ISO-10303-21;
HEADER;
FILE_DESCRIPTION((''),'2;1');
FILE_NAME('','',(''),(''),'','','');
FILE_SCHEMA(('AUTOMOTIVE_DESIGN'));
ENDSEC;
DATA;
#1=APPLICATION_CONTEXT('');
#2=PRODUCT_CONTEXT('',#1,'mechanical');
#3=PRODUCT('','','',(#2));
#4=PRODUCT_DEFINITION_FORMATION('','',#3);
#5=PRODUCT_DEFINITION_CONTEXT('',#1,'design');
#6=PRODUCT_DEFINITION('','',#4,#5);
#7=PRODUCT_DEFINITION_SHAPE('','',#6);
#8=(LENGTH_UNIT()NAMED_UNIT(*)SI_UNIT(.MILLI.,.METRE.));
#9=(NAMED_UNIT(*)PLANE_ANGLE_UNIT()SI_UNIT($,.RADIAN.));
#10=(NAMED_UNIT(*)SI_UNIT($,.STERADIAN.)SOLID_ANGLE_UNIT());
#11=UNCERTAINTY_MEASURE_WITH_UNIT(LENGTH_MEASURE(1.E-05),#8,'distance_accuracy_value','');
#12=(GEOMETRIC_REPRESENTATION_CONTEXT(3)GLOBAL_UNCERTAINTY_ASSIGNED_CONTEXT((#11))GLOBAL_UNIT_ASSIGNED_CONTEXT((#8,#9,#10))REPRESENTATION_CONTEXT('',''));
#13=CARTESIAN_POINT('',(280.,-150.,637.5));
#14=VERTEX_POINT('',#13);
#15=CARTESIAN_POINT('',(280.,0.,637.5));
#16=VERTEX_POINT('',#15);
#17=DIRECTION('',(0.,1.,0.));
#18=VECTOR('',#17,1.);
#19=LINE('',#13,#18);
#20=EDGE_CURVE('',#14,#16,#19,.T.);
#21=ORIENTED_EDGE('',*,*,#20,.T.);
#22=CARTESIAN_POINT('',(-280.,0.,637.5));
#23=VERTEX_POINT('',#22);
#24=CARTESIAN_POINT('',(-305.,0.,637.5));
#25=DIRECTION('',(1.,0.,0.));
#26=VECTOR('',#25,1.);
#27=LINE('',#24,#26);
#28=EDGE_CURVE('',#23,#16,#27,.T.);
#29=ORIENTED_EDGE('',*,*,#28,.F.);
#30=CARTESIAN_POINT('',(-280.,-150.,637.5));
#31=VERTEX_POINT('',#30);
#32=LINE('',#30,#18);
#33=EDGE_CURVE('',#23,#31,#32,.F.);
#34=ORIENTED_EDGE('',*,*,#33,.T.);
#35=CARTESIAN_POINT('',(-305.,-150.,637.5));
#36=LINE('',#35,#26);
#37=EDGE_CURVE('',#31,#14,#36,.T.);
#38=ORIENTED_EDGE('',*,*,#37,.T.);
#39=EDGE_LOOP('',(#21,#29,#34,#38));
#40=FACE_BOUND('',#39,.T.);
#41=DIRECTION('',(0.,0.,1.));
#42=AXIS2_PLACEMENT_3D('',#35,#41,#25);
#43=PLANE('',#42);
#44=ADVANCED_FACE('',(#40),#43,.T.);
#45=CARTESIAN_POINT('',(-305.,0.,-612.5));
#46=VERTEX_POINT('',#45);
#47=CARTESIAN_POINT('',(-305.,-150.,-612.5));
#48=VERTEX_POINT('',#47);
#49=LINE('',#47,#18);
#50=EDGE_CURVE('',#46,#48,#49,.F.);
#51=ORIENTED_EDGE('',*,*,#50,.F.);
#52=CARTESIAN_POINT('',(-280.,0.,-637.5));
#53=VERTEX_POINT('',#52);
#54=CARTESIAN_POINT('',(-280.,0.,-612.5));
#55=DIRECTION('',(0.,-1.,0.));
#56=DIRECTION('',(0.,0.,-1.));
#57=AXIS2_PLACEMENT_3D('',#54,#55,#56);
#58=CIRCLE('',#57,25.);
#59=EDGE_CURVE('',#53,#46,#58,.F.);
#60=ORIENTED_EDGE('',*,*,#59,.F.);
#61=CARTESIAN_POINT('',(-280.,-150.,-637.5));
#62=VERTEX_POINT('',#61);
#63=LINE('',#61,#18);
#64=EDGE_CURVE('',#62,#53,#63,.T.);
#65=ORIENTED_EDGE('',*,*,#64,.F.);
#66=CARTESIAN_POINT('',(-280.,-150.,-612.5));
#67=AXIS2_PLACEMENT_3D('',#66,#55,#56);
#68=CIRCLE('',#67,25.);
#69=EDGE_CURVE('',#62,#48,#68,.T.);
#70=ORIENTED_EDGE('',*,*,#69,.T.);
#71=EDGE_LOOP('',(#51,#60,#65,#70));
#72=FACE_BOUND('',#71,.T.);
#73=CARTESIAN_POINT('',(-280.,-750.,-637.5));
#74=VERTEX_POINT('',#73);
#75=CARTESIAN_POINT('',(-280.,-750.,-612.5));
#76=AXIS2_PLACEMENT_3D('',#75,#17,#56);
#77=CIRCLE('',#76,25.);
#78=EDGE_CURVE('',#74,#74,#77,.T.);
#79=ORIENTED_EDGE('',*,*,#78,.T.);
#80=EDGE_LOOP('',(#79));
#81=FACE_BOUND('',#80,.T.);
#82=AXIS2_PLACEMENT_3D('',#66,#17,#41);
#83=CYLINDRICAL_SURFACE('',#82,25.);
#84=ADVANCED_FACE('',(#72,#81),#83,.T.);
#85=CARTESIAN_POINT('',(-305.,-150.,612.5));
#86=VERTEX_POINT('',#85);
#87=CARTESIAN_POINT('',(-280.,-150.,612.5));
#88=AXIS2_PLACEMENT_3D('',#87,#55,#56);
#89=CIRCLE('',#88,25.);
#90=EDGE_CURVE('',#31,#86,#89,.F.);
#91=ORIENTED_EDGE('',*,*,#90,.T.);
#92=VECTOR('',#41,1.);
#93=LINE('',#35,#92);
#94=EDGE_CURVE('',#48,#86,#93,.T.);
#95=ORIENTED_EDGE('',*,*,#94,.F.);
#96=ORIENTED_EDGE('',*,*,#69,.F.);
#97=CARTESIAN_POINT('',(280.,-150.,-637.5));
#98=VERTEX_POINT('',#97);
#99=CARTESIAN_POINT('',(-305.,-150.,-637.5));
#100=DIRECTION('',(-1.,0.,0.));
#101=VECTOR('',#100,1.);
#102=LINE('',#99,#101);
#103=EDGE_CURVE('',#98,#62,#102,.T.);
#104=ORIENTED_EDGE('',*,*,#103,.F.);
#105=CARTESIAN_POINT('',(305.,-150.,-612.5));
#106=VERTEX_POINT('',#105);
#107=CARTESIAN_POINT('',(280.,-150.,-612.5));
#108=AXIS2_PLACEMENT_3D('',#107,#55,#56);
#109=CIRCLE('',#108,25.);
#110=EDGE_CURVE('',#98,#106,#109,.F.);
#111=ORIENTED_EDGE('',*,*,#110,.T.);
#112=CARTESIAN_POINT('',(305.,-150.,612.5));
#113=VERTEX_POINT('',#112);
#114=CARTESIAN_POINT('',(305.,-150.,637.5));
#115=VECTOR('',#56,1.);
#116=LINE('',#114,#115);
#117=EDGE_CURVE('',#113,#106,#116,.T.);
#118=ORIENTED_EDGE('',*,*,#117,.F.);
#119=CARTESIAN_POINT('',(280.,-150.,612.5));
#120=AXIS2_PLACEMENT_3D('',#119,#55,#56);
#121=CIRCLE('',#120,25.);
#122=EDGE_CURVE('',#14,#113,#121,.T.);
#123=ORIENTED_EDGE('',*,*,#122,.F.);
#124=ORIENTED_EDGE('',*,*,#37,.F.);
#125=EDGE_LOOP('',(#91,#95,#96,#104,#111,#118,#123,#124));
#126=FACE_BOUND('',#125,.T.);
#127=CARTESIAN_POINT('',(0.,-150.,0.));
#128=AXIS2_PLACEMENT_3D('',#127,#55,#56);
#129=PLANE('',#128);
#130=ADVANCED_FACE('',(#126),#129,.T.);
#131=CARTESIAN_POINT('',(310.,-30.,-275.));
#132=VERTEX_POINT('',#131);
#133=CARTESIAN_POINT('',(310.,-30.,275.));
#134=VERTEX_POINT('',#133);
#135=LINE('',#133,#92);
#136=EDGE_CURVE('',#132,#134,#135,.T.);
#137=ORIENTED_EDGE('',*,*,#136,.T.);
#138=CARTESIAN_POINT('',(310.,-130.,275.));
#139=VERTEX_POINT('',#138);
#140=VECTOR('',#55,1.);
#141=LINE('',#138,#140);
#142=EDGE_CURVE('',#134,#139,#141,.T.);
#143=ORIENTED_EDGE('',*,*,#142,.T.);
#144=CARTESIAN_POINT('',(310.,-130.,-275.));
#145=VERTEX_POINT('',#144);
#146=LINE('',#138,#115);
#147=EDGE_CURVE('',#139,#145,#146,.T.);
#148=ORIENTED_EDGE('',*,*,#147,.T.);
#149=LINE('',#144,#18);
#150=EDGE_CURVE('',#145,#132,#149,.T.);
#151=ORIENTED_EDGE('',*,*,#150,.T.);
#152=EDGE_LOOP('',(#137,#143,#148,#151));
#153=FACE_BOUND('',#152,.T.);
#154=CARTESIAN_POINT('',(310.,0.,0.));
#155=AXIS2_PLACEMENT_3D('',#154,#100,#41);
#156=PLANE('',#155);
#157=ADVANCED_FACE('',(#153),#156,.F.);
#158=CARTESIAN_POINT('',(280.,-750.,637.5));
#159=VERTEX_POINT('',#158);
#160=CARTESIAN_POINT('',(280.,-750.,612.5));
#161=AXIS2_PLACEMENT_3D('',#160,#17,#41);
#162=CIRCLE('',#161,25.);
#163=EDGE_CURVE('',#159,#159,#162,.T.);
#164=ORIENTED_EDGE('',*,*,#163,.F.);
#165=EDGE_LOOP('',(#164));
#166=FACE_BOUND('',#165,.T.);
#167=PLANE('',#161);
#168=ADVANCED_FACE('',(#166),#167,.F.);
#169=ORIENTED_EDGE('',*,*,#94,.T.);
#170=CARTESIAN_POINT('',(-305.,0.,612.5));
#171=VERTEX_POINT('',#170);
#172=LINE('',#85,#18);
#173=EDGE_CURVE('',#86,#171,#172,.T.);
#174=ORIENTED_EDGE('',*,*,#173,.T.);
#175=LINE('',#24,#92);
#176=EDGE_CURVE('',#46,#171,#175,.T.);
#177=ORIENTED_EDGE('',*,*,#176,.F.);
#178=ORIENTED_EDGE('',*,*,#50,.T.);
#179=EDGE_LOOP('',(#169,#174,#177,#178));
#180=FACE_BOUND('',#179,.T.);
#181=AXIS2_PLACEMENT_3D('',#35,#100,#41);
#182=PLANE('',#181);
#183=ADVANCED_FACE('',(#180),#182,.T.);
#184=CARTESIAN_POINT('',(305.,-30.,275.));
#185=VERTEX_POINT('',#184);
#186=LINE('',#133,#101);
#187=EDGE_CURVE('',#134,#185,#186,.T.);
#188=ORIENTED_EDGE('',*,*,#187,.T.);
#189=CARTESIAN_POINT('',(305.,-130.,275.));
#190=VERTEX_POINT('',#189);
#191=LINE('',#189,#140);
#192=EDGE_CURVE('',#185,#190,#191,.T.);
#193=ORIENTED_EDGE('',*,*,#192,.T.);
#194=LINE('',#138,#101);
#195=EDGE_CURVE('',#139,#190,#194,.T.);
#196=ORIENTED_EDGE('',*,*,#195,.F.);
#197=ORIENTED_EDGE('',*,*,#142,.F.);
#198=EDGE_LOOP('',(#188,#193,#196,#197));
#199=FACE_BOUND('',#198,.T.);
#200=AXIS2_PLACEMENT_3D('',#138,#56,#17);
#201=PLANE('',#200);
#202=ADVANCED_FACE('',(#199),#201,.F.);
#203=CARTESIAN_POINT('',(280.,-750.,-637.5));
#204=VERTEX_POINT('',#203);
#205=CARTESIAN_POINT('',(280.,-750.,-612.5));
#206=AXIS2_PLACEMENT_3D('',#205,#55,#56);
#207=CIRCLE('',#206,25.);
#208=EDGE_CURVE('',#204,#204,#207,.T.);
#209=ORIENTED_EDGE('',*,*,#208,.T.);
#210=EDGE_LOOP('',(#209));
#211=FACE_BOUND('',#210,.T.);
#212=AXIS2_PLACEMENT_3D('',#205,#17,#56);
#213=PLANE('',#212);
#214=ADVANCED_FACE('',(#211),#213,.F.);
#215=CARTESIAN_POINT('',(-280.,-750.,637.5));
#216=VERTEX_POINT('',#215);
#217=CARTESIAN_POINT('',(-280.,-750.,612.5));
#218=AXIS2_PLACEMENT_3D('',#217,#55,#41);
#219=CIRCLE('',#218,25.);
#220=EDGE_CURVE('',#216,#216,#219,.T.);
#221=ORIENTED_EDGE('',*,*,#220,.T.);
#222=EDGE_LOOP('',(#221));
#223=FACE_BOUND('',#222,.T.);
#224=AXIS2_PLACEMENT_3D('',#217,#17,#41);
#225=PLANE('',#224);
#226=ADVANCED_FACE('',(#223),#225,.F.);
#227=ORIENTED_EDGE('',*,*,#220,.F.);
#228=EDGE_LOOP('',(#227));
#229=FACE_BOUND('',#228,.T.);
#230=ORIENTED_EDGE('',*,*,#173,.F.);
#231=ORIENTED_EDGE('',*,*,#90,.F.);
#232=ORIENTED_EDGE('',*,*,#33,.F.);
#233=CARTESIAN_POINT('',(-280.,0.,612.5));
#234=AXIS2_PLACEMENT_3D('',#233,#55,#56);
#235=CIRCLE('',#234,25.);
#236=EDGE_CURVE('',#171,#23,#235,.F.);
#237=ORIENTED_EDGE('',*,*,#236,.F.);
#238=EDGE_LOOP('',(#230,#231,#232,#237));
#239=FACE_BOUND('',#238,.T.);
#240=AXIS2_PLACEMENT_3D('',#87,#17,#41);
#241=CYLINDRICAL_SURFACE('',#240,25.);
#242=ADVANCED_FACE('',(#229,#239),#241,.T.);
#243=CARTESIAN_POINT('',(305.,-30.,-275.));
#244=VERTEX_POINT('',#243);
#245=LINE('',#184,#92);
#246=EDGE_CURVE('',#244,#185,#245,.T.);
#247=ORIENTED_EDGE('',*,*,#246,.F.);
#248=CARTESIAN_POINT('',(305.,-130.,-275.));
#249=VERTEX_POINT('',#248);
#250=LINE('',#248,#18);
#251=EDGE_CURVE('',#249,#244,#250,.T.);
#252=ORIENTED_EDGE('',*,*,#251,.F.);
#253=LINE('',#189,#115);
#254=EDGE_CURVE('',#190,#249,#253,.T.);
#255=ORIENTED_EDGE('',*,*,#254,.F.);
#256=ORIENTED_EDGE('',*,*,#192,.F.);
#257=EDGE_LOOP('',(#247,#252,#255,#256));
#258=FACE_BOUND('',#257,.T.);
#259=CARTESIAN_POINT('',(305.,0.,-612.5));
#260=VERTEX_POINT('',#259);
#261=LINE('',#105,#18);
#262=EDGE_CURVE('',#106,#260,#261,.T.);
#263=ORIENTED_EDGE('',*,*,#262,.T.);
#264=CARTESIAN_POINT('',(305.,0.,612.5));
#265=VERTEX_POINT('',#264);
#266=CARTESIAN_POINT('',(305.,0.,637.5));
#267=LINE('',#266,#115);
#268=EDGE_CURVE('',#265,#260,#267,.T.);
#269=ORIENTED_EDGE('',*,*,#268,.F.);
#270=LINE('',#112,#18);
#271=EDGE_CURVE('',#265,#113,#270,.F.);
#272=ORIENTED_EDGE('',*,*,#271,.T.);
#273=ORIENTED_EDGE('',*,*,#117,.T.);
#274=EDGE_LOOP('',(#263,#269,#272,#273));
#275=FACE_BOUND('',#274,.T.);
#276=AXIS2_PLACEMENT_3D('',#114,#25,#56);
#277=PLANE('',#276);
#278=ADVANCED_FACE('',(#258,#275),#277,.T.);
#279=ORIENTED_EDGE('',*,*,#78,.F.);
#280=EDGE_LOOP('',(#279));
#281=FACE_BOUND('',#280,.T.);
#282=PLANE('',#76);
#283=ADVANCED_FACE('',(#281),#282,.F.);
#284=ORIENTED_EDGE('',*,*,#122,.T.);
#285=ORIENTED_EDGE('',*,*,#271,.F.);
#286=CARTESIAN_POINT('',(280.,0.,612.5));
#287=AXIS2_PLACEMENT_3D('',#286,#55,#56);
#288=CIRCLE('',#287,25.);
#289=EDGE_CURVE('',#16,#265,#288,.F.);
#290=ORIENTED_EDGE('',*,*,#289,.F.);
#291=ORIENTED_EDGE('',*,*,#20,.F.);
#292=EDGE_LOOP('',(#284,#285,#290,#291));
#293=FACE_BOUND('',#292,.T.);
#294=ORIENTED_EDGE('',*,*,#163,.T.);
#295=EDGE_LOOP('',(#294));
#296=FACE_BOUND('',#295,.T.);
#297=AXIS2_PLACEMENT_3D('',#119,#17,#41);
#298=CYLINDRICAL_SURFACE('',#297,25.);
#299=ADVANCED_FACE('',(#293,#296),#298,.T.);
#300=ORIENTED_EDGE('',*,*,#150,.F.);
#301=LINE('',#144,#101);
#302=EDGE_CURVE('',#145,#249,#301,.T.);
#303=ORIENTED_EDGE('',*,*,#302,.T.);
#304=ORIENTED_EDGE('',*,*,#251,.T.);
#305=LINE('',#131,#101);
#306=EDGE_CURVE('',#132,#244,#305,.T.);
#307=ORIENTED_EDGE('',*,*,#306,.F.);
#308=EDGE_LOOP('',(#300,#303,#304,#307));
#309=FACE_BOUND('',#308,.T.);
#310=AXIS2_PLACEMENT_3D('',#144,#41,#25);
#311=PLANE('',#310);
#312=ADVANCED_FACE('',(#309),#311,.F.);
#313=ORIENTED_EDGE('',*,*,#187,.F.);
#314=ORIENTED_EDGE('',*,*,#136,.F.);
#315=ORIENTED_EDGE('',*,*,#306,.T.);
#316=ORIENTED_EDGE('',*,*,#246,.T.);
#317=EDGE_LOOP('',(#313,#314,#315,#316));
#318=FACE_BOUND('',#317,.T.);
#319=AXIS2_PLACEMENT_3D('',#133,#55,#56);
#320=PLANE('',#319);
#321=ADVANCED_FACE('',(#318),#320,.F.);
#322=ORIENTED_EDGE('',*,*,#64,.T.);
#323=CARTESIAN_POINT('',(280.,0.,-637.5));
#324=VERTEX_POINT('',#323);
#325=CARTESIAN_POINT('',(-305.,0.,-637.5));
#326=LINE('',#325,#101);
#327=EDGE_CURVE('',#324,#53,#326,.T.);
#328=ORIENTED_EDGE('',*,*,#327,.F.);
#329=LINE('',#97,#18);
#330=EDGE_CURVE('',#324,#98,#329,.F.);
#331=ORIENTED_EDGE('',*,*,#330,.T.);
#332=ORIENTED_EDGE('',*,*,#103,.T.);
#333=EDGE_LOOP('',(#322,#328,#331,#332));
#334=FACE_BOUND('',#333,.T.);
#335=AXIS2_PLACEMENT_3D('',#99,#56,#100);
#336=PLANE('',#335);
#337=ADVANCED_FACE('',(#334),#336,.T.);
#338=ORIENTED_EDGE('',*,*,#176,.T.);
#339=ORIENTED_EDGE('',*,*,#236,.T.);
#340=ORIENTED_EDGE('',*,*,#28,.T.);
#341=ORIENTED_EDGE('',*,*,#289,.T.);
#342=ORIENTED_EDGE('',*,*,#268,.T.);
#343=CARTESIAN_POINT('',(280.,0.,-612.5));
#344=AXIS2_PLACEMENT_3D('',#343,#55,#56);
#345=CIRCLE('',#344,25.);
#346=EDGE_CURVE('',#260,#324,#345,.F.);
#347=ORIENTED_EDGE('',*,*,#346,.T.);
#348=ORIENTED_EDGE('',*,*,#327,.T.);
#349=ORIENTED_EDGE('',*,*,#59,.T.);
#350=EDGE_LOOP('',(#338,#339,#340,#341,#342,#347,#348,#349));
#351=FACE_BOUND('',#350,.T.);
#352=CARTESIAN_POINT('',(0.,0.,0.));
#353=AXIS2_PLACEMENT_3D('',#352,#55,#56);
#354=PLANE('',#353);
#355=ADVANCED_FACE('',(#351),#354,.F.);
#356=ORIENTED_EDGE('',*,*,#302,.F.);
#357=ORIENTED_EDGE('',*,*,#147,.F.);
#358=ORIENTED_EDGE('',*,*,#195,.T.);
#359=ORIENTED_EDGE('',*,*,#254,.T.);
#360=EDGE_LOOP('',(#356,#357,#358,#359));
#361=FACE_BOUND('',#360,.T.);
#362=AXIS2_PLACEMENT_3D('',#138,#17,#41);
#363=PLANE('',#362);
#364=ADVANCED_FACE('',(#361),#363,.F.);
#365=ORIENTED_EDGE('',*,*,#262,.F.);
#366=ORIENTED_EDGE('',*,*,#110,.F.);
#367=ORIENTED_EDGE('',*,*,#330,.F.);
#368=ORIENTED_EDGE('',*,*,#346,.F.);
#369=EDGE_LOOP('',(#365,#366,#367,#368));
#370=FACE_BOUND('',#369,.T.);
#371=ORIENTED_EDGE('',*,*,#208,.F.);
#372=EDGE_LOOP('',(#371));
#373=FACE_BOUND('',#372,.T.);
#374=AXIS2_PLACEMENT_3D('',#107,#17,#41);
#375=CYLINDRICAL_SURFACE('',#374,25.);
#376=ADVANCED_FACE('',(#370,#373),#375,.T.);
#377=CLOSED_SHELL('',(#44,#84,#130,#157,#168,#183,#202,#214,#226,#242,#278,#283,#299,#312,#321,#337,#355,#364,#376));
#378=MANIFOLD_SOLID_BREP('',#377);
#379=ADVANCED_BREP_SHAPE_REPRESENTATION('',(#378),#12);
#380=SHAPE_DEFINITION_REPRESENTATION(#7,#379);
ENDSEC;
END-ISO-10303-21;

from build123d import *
from build123d.topology import SkipClean

# Parameters (mm, degrees)
SKETCH_2_W               = 610
SKETCH_2_H               = 1275
EXTRUDE_1_DEPTH          = 150
FILLET_1_R               = 25
EXTRUDE_START            = -750
SKETCH_3_R               = 25
EXTRUDE_2_DEPTH          = 750
MIRROR_START             = -750
MIRROR_2_COPY_1_SKETCH_R = 25
MIRROR_2_COPY_1_DEPTH    = 750
SKETCH_4_W               = 550
SKETCH_4_H               = 100
EXTRUDE_3_DEPTH          = 5


with BuildPart() as part:
    # 草图2 → 凸台-拉伸1 (new body)
    with BuildSketch(Plane(origin=(0, 0, 0), x_dir=(1, 0, 0), z_dir=(0, 1, 0))):
        Rectangle(SKETCH_2_W, SKETCH_2_H)
    extrude(amount=-EXTRUDE_1_DEPTH)

    # 圆角1
    fillet_1_edges = [part.edges().sort_by_distance(p)[0] for p in [
        (-305, -75, -637.5),
        (305, -75, -637.5),
        (-305, -75, 637.5),
        (305, -75, 637.5),
    ]]
    fillet(fillet_1_edges, radius=FILLET_1_R)

    # 草图3 → 凸台-拉伸2 (add)
    with SkipClean():  # the faces are left unmerged after this step: merging them gives an invalid solid
        with BuildSketch(Plane(origin=(0, 0, 0), x_dir=(1, 0, 0), z_dir=(0, 1, 0)).offset(EXTRUDE_START)):
            with Locations((280, -612.5)):
                Circle(SKETCH_3_R)
        extrude_2 = extrude(amount=EXTRUDE_2_DEPTH)

    # 镜向1: 凸台-拉伸2 across plane
    with SkipClean():  # the faces are left unmerged after this step: merging them gives an invalid solid
        add(extrude_2.mirror(Plane(origin=(0, 0, 0), x_dir=(0, 0, 1), z_dir=(1, 0, 0))))

    # 镜向2: 凸台-拉伸2 across plane
    with SkipClean():  # the faces are left unmerged after this step: merging them gives an invalid solid
        add(extrude_2.mirror(Plane.XY))

    # 镜向2 copy 1 sketch → 镜向2 copy 1 (add)
    with SkipClean():  # the faces are left unmerged after this step: merging them gives an invalid solid
        with BuildSketch(Plane(origin=(0, 0, 0), x_dir=(-1, 0, 0), z_dir=(0, 1, 0)).offset(MIRROR_START)):
            with Locations((280, -612.5)):
                Circle(MIRROR_2_COPY_1_SKETCH_R)
        extrude(amount=MIRROR_2_COPY_1_DEPTH)

    # 草图4 → 凸台-拉伸3 (add)
    with SkipClean():  # the faces are left unmerged after this step: merging them gives an invalid solid
        with BuildSketch(Plane(origin=(305, 0, 0), x_dir=(0, 0, -1), z_dir=(1, 0, 0))):
            with Locations((0, -80)):
                Rectangle(SKETCH_4_W, SKETCH_4_H)
        extrude(amount=EXTRUDE_3_DEPTH)


solid = part.part
